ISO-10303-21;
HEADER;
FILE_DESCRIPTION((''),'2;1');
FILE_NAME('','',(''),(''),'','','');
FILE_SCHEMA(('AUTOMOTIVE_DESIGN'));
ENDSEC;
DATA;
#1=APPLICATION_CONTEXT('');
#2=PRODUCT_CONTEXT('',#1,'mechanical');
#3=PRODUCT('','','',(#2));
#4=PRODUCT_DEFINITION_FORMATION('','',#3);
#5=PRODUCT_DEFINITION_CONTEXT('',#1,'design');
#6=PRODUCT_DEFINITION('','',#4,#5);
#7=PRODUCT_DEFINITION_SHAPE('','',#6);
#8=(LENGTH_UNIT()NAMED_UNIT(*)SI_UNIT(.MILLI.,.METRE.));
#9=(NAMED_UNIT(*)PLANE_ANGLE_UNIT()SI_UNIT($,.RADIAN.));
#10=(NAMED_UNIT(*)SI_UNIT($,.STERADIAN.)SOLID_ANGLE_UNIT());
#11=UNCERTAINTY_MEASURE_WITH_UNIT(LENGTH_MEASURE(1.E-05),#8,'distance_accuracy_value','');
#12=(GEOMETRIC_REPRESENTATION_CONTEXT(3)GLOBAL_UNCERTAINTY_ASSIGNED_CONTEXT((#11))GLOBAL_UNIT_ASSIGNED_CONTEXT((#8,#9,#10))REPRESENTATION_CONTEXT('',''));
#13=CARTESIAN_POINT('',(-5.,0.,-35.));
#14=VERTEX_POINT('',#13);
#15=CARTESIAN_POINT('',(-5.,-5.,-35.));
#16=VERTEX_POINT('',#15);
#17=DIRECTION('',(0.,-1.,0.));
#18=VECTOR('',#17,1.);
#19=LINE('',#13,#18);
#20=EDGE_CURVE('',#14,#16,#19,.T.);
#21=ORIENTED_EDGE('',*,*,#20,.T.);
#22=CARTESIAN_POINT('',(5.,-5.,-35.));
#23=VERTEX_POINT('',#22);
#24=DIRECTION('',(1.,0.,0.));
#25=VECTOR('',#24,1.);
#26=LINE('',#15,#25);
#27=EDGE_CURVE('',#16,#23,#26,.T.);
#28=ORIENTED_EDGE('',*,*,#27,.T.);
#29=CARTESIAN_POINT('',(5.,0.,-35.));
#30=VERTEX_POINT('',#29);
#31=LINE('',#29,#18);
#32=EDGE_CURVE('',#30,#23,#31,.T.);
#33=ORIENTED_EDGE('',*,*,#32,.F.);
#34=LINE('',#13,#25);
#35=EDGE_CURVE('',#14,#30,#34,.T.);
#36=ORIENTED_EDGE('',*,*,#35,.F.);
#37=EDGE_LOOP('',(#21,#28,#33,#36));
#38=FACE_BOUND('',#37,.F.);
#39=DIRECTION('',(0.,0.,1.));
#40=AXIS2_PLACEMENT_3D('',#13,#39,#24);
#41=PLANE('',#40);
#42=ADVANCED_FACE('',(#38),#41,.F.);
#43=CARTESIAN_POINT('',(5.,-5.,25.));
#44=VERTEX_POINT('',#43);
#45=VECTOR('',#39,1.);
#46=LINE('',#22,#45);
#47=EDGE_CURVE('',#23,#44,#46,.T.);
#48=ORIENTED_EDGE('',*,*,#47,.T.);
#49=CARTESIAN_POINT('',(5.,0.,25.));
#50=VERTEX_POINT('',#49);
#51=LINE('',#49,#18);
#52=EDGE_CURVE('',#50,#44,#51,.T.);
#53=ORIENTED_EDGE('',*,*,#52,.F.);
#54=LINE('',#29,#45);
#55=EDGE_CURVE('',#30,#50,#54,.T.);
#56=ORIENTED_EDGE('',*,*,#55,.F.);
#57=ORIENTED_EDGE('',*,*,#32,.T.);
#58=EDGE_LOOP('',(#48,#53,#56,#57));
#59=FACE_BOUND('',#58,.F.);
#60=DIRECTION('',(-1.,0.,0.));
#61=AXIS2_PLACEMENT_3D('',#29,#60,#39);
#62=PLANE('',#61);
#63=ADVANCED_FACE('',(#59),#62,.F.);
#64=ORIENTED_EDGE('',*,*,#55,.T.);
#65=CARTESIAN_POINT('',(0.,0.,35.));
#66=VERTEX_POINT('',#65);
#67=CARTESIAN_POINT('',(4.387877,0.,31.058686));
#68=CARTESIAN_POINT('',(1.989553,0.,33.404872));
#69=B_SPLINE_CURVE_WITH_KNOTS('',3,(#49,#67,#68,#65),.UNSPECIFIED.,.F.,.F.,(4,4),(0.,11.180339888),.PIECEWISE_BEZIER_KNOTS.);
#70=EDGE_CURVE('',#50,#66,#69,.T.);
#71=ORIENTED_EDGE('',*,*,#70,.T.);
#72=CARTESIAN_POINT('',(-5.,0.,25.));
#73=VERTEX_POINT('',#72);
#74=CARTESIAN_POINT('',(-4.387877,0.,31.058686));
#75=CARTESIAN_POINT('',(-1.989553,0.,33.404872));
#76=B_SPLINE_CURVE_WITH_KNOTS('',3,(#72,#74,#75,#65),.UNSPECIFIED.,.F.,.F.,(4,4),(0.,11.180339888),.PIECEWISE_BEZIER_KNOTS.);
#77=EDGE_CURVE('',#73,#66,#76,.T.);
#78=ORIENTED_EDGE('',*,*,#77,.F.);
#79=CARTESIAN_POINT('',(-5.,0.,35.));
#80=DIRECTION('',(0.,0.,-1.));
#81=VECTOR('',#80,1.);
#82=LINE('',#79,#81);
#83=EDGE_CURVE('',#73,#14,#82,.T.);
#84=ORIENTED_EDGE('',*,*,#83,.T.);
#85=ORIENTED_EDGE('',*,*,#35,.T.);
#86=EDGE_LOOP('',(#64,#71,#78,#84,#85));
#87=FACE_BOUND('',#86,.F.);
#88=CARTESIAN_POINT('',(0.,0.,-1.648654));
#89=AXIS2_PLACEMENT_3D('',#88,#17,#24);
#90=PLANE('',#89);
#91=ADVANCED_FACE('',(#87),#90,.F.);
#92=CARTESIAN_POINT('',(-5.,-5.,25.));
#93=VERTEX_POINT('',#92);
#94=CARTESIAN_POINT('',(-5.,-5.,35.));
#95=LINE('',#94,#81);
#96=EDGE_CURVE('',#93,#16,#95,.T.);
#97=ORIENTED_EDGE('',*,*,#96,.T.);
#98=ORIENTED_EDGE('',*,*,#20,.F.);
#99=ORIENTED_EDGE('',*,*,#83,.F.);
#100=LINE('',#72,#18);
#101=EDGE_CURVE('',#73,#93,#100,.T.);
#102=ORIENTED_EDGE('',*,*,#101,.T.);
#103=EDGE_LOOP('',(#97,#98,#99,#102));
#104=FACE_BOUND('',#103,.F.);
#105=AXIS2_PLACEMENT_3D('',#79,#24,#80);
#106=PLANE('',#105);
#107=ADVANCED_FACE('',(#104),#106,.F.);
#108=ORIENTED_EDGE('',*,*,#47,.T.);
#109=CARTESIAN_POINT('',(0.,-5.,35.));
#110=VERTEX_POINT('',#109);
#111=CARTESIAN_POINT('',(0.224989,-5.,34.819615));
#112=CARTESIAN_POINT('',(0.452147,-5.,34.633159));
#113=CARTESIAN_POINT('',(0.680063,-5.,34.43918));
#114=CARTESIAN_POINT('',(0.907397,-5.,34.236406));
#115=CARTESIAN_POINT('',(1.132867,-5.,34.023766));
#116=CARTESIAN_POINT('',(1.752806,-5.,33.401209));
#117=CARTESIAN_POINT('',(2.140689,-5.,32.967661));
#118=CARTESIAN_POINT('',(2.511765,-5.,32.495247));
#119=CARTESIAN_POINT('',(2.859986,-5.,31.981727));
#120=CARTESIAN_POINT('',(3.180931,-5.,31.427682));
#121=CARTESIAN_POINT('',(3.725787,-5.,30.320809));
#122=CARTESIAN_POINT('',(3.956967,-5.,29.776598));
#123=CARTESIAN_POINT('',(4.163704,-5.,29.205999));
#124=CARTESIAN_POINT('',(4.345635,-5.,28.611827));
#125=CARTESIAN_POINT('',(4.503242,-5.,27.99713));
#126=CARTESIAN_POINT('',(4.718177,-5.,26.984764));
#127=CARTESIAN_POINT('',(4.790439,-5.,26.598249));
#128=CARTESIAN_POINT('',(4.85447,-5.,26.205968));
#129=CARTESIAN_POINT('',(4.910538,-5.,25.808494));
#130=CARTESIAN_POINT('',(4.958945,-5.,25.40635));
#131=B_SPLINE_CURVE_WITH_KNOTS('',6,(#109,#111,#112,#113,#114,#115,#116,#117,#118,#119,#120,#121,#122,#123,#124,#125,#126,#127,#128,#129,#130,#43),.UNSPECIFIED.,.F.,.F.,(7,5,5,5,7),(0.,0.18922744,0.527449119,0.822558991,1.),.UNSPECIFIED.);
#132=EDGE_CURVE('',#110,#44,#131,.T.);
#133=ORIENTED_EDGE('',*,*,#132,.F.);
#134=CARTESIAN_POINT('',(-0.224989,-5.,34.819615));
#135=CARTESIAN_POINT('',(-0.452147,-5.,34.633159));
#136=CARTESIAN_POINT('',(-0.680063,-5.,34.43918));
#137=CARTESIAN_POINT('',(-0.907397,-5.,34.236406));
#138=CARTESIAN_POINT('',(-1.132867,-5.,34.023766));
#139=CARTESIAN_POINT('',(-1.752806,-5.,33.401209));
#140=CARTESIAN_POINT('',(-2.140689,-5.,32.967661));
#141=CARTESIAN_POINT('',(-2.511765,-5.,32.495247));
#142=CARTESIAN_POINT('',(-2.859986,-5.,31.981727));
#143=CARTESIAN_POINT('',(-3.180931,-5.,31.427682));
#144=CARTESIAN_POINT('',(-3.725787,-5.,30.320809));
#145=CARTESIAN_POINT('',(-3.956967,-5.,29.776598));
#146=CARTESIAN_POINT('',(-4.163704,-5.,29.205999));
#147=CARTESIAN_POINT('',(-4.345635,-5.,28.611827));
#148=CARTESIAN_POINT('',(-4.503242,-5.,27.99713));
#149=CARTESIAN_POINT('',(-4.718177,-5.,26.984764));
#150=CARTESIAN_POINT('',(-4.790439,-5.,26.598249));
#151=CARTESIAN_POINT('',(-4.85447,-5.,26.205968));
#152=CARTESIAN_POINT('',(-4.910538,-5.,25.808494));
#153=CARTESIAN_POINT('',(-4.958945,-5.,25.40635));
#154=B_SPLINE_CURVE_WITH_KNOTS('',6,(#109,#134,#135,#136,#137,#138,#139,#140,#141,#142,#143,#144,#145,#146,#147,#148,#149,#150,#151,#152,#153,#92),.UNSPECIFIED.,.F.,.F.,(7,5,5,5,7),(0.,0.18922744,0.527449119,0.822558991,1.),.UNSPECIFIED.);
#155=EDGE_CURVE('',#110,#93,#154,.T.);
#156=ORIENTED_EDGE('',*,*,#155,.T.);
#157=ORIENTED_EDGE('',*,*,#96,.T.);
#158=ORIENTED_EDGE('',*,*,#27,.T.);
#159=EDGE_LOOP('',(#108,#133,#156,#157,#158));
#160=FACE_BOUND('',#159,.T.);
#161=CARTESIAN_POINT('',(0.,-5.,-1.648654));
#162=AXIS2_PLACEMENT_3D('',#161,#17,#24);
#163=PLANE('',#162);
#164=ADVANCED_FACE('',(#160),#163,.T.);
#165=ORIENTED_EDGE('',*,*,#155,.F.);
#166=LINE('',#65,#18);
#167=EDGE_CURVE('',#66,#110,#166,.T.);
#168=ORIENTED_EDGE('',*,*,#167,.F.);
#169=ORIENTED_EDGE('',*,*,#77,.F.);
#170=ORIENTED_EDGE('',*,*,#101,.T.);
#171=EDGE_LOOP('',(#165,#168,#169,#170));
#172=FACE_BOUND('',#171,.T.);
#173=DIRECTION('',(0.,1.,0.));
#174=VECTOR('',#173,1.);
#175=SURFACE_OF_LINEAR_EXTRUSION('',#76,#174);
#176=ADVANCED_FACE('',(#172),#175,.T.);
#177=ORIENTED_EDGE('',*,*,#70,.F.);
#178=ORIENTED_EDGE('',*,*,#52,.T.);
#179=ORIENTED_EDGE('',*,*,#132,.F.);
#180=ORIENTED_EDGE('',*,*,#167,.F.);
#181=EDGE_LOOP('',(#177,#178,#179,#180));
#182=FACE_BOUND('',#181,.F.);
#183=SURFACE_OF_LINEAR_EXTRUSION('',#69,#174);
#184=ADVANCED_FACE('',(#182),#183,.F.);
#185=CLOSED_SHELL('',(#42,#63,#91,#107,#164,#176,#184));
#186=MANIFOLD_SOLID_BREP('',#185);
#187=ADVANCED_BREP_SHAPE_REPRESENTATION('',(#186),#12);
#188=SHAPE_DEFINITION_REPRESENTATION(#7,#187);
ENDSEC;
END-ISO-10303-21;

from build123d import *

# Parameters (mm, degrees)
F1_DEPTH      = 5
F2_DEPTH      = 25
F2_DEPTH_BACK = 74
F3_DEPTH      = 74
F3_DEPTH_BACK = 5.0010001


# Not quite as in the source:
# - an extrude ends at something that could not be found from the text; its depth is read off the source's solid


with BuildPart() as f1:
    # F0 (on Front) → F1 (new body)
    with BuildSketch(Plane.XZ):
        with BuildLine():
            add(Edge.make_bspline(
                [(5, 25), (4.3878769502, 31.0586858541), (1.9895534497, 33.4048718214), (0, 35)],
                knots=[0, 0, 0, 0, 11.1803398875, 11.1803398875, 11.1803398875, 11.1803398875], degree=3))
            add(Edge.make_bspline(
                [(-5, 25), (-4.3878769502, 31.0586858541), (-1.9895534497, 33.4048718214), (0, 35)],
                knots=[0, 0, 0, 0, 11.1803398875, 11.1803398875, 11.1803398875, 11.1803398875], degree=3))
            Line((-5, 25), (-5, -35))
            Line((-5, -35), (5, -35))
            Line((5, -35), (5, 25))
        make_face()
        with BuildLine():
            Line((5, 25), (5, 35))
            Line((5, 35), (0, 35))
            add(Edge.make_bspline(
                [(5, 25), (4.3878769502, 31.0586858541), (1.9895534497, 33.4048718214), (0, 35)],
                knots=[0, 0, 0, 0, 11.1803398875, 11.1803398875, 11.1803398875, 11.1803398875], degree=3))
        make_face()
        with BuildLine():
            add(Edge.make_bspline(
                [(-5, 25), (-4.3878769502, 31.0586858541), (-1.9895534497, 33.4048718214), (0, 35)],
                knots=[0, 0, 0, 0, 11.1803398875, 11.1803398875, 11.1803398875, 11.1803398875], degree=3))
            Line((0, 35), (-5, 35))
            Line((-5, 35), (-5, 25))
        make_face()
    extrude(amount=F1_DEPTH)

    # F0 (on Front) → F2 (cut, two sides)
    with BuildSketch(Plane.XZ) as f2_sk:
        with BuildLine():
            add(Edge.make_bspline(
                [(-5, 25), (-4.3878769502, 31.0586858541), (-1.9895534497, 33.4048718214), (0, 35)],
                knots=[0, 0, 0, 0, 11.1803398875, 11.1803398875, 11.1803398875, 11.1803398875], degree=3))
            Line((0, 35), (-5, 35))
            Line((-5, 35), (-5, 25))
        make_face()
    extrude(amount=F2_DEPTH, mode=Mode.SUBTRACT)
    extrude(f2_sk.sketch, amount=-F2_DEPTH_BACK, mode=Mode.SUBTRACT)

    # F0 (on Front) → F3 (cut, two sides)
    with BuildSketch(Plane.XZ) as f3_sk:
        with BuildLine():
            Line((5, 25), (5, 35))
            Line((5, 35), (0, 35))
            add(Edge.make_bspline(
                [(5, 25), (4.3878769502, 31.0586858541), (1.9895534497, 33.4048718214), (0, 35)],
                knots=[0, 0, 0, 0, 11.1803398875, 11.1803398875, 11.1803398875, 11.1803398875], degree=3))
        make_face()
    extrude(amount=-F3_DEPTH, mode=Mode.SUBTRACT)
    extrude(f3_sk.sketch, amount=F3_DEPTH_BACK, mode=Mode.SUBTRACT)


solid = f1.part
